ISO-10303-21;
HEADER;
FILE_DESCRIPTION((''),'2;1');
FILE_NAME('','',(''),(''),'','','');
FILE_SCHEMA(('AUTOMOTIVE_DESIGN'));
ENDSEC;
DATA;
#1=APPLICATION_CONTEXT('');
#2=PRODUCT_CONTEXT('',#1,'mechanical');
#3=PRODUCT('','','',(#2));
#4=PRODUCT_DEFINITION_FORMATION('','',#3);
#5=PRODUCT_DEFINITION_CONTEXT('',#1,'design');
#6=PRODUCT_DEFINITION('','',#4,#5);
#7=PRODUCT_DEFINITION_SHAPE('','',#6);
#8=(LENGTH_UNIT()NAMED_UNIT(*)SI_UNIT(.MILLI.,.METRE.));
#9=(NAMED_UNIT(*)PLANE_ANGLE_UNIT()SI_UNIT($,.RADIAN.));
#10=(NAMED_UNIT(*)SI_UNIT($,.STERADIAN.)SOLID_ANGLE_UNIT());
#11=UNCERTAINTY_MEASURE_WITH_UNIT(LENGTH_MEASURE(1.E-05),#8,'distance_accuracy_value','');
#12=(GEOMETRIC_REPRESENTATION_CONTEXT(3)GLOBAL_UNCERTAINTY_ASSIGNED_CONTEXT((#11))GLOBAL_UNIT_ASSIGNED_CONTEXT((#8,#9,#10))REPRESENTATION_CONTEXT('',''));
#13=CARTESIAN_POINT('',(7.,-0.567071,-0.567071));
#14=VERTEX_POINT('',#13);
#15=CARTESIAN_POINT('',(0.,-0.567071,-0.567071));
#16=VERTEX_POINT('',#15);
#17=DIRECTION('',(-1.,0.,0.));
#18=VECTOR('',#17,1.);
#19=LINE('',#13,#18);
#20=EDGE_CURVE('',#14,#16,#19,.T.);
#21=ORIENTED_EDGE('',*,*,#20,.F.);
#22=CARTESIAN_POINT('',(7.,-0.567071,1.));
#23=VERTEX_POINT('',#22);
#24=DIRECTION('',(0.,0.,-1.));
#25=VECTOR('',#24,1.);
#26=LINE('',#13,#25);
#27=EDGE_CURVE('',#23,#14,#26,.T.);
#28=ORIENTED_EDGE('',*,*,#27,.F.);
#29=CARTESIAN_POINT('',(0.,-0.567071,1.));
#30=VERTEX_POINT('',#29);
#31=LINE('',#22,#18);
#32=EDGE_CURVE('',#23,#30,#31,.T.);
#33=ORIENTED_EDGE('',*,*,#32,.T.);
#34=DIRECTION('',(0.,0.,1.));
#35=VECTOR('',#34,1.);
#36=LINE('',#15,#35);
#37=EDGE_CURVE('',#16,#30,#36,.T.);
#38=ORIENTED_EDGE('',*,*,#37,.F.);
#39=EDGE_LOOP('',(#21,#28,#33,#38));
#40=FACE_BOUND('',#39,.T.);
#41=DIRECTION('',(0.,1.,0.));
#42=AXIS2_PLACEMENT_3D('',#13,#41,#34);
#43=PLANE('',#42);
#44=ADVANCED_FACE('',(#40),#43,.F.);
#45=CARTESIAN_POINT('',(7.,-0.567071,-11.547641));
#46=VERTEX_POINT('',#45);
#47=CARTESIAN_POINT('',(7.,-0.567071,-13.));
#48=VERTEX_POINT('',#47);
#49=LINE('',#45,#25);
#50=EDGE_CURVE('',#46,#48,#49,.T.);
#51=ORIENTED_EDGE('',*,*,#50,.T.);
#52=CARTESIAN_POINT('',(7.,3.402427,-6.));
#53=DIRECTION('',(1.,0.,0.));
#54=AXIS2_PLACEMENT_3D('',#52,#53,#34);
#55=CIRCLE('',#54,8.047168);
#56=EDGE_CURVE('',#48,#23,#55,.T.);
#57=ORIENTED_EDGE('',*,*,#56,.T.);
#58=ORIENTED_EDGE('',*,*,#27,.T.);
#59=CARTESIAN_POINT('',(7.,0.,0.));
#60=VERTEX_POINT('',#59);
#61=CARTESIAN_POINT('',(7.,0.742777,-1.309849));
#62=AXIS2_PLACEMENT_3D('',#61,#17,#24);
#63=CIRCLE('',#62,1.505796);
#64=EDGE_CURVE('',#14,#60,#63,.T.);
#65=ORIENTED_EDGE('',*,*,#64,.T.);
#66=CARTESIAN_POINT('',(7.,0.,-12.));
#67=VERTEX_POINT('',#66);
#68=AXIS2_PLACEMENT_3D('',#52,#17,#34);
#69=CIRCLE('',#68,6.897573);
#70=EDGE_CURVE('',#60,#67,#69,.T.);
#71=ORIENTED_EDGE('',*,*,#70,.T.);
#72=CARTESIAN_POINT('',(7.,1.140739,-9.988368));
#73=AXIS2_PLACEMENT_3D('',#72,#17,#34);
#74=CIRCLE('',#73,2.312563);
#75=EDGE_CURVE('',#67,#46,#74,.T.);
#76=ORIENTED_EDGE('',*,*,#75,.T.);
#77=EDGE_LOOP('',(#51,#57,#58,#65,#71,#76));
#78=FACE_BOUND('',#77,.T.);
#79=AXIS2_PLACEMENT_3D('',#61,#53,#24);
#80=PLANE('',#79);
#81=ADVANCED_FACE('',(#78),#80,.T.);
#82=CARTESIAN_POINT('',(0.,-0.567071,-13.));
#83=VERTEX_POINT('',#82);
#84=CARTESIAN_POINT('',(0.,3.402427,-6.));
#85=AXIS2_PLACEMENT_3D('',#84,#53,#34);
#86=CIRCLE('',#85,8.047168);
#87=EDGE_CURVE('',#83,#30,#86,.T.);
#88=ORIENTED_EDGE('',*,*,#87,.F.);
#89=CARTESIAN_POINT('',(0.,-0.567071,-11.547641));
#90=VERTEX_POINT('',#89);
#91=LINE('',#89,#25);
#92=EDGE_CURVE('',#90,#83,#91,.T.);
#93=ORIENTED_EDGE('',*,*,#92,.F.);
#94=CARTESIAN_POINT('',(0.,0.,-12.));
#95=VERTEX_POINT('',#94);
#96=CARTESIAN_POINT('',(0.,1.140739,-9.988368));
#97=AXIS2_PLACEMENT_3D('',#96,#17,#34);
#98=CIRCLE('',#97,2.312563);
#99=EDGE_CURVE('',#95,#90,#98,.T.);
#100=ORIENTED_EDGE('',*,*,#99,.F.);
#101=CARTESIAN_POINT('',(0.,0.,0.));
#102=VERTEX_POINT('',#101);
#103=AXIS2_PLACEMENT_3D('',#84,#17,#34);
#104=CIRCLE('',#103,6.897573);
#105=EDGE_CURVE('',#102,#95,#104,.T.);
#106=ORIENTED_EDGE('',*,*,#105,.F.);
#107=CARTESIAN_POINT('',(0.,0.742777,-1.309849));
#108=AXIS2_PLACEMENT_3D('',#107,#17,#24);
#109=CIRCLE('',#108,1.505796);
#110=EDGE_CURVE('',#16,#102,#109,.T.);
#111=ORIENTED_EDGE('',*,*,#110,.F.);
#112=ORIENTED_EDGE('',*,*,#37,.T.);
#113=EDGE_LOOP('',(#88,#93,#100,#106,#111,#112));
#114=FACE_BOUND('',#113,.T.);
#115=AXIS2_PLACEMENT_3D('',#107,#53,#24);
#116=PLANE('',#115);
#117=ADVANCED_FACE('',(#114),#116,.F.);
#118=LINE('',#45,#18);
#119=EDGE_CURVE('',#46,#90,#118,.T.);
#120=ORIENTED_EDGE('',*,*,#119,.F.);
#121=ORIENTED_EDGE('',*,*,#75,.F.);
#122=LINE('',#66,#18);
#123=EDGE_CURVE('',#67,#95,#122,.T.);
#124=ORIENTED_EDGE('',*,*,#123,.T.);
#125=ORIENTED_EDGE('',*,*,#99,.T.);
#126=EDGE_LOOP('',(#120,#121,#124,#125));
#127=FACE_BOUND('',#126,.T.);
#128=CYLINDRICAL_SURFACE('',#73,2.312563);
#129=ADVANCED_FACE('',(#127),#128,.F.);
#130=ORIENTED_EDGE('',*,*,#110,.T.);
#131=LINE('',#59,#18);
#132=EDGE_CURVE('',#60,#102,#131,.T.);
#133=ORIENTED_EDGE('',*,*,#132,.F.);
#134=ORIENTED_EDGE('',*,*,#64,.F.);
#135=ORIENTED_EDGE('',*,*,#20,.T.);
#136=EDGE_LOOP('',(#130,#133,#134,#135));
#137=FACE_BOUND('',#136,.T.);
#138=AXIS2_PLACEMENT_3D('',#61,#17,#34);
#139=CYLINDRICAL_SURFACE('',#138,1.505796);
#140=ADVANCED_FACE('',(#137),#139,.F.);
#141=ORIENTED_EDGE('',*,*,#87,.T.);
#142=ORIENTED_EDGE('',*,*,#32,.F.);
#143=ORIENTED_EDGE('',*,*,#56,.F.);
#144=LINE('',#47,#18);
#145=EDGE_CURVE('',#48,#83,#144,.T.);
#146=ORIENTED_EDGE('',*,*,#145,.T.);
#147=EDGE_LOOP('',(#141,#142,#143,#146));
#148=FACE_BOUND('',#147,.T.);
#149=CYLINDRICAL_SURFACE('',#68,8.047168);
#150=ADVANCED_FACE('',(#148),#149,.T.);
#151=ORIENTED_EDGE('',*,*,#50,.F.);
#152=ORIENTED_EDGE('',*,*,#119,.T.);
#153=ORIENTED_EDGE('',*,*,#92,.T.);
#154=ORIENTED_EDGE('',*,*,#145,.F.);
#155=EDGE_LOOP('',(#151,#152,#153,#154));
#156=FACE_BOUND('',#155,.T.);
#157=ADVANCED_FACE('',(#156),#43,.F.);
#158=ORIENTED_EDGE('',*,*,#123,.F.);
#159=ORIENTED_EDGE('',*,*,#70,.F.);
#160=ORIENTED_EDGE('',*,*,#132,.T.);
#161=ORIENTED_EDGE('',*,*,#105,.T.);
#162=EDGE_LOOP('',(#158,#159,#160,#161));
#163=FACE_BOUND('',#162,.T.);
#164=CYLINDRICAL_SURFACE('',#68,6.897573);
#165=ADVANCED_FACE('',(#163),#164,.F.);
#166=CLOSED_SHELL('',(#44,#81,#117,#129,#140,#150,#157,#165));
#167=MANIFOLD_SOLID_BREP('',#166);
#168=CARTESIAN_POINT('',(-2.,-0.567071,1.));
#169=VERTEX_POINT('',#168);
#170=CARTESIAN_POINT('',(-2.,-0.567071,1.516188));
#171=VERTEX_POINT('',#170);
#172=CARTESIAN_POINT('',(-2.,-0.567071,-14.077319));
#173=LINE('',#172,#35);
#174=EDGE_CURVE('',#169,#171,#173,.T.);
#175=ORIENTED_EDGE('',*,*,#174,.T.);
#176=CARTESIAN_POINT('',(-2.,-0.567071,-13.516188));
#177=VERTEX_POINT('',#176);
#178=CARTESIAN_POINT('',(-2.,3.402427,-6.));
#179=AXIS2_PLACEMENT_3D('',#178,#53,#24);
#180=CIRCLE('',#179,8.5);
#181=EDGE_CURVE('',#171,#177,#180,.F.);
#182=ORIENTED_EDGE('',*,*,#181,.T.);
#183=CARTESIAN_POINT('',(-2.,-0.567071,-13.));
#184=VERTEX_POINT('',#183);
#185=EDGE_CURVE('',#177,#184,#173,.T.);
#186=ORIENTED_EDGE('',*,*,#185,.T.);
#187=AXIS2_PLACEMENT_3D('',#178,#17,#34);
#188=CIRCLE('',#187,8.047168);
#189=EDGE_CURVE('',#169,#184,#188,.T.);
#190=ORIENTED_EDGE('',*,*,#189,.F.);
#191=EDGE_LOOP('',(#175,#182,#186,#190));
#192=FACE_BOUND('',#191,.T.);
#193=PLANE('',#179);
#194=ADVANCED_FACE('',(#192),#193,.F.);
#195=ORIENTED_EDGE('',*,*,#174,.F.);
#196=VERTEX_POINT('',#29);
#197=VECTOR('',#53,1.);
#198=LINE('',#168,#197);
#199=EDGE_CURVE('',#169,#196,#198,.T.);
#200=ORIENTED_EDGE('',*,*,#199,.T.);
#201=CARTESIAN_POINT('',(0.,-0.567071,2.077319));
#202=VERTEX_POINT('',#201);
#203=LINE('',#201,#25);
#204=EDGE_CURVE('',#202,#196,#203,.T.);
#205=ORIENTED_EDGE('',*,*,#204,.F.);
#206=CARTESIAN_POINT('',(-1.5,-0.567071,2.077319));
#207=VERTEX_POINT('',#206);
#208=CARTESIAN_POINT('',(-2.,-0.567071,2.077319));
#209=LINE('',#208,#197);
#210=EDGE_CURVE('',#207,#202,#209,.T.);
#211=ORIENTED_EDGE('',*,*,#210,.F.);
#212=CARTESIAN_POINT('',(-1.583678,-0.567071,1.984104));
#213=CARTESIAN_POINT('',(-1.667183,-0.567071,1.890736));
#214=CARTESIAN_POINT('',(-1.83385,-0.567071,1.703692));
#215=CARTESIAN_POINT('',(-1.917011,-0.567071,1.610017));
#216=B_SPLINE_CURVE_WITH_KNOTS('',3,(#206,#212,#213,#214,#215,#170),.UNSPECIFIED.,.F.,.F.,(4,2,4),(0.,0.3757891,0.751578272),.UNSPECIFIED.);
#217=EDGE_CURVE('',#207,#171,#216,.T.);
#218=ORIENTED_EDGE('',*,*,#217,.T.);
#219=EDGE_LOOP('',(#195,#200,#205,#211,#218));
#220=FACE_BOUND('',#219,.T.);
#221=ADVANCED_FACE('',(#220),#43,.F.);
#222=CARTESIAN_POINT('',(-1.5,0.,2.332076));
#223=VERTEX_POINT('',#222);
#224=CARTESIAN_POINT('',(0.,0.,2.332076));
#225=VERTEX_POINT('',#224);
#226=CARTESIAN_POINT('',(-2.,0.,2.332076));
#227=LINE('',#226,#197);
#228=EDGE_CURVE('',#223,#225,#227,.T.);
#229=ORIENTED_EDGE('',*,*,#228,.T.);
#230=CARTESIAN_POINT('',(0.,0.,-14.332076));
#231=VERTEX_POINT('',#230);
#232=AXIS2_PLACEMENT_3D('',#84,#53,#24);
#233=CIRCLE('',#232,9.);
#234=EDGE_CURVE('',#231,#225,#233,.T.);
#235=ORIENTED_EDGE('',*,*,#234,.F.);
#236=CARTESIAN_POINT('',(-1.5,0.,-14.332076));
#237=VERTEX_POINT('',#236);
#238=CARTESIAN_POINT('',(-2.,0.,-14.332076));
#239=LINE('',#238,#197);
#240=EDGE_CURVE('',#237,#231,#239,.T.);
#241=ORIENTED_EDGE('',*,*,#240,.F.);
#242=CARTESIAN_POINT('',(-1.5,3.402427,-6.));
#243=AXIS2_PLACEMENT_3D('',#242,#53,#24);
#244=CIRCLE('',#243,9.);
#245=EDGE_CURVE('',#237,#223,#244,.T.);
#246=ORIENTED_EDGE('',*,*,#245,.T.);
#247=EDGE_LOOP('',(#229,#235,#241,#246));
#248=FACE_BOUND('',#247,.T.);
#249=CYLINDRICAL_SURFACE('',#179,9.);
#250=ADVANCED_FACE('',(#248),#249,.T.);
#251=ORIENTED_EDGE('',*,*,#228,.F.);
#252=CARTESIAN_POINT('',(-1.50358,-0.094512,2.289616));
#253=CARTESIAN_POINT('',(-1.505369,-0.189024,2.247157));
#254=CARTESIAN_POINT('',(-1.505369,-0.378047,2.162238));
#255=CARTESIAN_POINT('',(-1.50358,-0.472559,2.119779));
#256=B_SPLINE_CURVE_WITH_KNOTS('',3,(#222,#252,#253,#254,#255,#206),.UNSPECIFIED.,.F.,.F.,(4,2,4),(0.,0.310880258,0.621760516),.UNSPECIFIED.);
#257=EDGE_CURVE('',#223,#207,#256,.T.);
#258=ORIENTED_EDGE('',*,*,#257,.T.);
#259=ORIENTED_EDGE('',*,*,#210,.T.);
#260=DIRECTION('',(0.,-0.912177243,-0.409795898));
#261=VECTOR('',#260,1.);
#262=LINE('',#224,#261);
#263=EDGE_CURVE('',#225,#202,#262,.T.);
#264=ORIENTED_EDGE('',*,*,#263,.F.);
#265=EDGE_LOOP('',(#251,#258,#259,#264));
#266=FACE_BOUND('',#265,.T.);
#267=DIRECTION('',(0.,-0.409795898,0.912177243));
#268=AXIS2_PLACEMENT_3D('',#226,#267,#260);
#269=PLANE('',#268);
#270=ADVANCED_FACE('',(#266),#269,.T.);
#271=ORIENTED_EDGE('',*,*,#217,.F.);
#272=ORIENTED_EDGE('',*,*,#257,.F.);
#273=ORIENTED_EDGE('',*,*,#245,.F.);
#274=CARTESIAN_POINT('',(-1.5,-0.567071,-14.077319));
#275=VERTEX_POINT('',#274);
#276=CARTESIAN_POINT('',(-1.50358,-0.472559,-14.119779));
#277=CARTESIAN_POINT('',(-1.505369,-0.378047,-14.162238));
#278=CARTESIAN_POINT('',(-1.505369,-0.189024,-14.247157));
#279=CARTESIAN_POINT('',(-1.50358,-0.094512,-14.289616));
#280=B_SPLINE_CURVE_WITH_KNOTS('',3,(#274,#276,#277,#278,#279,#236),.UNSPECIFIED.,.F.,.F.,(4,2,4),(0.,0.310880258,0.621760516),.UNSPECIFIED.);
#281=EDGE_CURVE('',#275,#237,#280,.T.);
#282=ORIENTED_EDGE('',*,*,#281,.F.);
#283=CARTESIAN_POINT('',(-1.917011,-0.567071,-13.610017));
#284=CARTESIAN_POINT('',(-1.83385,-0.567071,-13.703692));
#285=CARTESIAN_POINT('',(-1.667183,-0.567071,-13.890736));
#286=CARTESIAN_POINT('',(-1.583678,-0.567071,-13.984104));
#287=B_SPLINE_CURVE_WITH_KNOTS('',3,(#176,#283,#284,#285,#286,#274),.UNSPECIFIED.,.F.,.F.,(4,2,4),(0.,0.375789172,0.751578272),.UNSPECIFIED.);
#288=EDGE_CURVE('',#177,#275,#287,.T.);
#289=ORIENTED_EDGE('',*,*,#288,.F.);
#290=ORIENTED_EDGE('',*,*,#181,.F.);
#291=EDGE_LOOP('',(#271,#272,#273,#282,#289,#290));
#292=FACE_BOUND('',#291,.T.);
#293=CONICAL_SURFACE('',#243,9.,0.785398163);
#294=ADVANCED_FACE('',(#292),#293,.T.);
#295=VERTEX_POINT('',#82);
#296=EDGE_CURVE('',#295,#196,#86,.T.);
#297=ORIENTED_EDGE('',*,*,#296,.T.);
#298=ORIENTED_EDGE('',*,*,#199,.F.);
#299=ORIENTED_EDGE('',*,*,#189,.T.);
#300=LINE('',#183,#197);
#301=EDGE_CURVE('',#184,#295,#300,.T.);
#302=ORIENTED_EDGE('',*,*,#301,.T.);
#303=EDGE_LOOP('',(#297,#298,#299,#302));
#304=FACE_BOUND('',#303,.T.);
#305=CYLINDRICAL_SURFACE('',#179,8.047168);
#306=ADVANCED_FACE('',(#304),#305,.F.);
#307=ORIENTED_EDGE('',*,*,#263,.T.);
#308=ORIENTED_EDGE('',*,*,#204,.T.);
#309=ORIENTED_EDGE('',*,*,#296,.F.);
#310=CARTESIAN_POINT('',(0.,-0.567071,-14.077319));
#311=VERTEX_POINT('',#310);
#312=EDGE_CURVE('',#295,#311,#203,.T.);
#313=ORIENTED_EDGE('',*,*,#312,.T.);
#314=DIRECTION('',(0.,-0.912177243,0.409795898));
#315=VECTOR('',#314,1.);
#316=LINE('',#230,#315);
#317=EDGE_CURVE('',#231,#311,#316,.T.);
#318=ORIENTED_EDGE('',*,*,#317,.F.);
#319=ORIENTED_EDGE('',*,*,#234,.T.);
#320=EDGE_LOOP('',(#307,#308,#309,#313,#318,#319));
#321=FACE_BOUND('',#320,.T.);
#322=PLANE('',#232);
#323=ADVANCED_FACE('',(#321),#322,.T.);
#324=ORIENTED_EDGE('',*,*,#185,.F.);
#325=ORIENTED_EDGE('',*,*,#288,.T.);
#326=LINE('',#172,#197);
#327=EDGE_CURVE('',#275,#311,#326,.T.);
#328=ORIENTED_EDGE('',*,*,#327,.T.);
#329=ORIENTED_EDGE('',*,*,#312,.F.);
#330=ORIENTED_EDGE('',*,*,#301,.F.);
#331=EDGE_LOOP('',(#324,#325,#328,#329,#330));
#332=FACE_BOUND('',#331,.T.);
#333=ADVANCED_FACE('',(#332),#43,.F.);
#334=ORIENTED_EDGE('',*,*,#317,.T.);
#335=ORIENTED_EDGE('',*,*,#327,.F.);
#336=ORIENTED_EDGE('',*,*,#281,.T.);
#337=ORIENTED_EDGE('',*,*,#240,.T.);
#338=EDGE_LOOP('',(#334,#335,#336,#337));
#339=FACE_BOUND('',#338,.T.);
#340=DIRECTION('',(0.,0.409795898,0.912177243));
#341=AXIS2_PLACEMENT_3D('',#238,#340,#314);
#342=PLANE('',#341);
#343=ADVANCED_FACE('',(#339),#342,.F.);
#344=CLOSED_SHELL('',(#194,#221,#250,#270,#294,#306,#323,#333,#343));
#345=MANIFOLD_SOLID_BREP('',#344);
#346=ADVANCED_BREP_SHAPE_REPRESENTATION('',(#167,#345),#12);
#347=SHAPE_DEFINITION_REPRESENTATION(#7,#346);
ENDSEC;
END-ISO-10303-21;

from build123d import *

# Parameters (mm, degrees)
BOSS_EXTRUDE1_DEPTH = 7
BOSS_EXTRUDE3_DEPTH = 2
CUT_EXTRUDE1_START  = -2
CUT_EXTRUDE1_DEPTH  = 2
CHAMFER1_SIZE       = 0.5


with BuildPart() as part:
    # Sketch1 → Boss-Extrude1 (new body)
    with BuildSketch(Plane(origin=(0, 0, 0), x_dir=(0, 0, -1), z_dir=(1, 0, 0))):
        with BuildLine():
            Line((0.567071197, -0.567071197), (-1, -0.567071197))
            ThreePointArc((-1, -0.567071197), (6, 11.449595469), (13, -0.567071197))
            Line((13, -0.567071197), (11.547641445, -0.567071197))
            ThreePointArc((11.547641445, -0.567071197), (11.796193723, -0.301382773), (12, 0))
            ThreePointArc((12, 0), (6, 10.3), (0, 0))
            ThreePointArc((0, 0), (0.245090031, -0.321981166), (0.567071197, -0.567071197))
        make_face()
    extrude(amount=BOSS_EXTRUDE1_DEPTH)

    # Sketch6 → Boss-Extrude3 (add)
    with BuildSketch(Plane(origin=(0, 0, 0), x_dir=(0, 0, -1), z_dir=(1, 0, 0))):
        with BuildLine():
            Line((-2.332075927, 0), (-2.077319023, -0.567071197))
            Line((-2.077319023, -0.567071197), (-1, -0.567071197))
            Line((-1, -0.567071197), (13, -0.567071197))
            Line((13, -0.567071197), (14.077319023, -0.567071197))
            Line((14.077319023, -0.567071197), (14.332075927, 0))
            ThreePointArc((14.332075927, 0), (6, 12.402427184), (-2.332075927, 0))
        make_face()
    extrude(amount=-BOSS_EXTRUDE3_DEPTH)

    # Sketch1<31> → Cut-Extrude1 (cut)
    with BuildSketch(Plane(origin=(0, 0, 0), x_dir=(0, 0, -1), z_dir=(1, 0, 0)).offset(CUT_EXTRUDE1_START)):
        with BuildLine():
            Line((0.567071197, -0.567071197), (-1, -0.567071197))
            ThreePointArc((-1, -0.567071197), (6, 11.449595469), (13, -0.567071197))
            Line((13, -0.567071197), (11.547641445, -0.567071197))
            ThreePointArc((11.547641445, -0.567071197), (11.796193723, -0.301382773), (12, 0))
            ThreePointArc((12, 0), (6, 10.3), (0, 0))
            ThreePointArc((0, 0), (0.245090031, -0.321981166), (0.567071197, -0.567071197))
        make_face()
    extrude(amount=CUT_EXTRUDE1_DEPTH, mode=Mode.SUBTRACT)


with BuildPart() as cut_extrude1_piece_1:
    # of the separate pieces the step leaves, piece 1, a body of its own (cut_extrude1_pieces_kept)
    add(part.part.solids().sort_by_distance((7, -0.567071197, 1))[0])


with BuildPart() as cut_extrude1_piece_2:
    # of the separate pieces the step leaves, piece 2, a body of its own (cut_extrude1_pieces_kept)
    add(part.part.solids().sort_by_distance((0, 0, 2.332075927))[0])

    # Chamfer1
    # the kernel refuses this chamfer: 0.5 mm, written as the material it takes off along each edge
    with BuildSketch(Plane(origin=(-2, 3.402427184, -6), x_dir=(0, -0.5063226027269031, -0.8623441435806557), z_dir=(0, -0.8623441435806557, 0.5063226027269031))) as chamfer1_piece_1:
        Polygon((9, CHAMFER1_SIZE), (9 - CHAMFER1_SIZE, 0), (9, 0), align=None)
    revolve(axis=Axis((-2, 3.402427184, -6), (1, 0, 0)), revolution_arc=240.838378196, mode=Mode.SUBTRACT)


solid = Compound([cut_extrude1_piece_1.part, cut_extrude1_piece_2.part])
